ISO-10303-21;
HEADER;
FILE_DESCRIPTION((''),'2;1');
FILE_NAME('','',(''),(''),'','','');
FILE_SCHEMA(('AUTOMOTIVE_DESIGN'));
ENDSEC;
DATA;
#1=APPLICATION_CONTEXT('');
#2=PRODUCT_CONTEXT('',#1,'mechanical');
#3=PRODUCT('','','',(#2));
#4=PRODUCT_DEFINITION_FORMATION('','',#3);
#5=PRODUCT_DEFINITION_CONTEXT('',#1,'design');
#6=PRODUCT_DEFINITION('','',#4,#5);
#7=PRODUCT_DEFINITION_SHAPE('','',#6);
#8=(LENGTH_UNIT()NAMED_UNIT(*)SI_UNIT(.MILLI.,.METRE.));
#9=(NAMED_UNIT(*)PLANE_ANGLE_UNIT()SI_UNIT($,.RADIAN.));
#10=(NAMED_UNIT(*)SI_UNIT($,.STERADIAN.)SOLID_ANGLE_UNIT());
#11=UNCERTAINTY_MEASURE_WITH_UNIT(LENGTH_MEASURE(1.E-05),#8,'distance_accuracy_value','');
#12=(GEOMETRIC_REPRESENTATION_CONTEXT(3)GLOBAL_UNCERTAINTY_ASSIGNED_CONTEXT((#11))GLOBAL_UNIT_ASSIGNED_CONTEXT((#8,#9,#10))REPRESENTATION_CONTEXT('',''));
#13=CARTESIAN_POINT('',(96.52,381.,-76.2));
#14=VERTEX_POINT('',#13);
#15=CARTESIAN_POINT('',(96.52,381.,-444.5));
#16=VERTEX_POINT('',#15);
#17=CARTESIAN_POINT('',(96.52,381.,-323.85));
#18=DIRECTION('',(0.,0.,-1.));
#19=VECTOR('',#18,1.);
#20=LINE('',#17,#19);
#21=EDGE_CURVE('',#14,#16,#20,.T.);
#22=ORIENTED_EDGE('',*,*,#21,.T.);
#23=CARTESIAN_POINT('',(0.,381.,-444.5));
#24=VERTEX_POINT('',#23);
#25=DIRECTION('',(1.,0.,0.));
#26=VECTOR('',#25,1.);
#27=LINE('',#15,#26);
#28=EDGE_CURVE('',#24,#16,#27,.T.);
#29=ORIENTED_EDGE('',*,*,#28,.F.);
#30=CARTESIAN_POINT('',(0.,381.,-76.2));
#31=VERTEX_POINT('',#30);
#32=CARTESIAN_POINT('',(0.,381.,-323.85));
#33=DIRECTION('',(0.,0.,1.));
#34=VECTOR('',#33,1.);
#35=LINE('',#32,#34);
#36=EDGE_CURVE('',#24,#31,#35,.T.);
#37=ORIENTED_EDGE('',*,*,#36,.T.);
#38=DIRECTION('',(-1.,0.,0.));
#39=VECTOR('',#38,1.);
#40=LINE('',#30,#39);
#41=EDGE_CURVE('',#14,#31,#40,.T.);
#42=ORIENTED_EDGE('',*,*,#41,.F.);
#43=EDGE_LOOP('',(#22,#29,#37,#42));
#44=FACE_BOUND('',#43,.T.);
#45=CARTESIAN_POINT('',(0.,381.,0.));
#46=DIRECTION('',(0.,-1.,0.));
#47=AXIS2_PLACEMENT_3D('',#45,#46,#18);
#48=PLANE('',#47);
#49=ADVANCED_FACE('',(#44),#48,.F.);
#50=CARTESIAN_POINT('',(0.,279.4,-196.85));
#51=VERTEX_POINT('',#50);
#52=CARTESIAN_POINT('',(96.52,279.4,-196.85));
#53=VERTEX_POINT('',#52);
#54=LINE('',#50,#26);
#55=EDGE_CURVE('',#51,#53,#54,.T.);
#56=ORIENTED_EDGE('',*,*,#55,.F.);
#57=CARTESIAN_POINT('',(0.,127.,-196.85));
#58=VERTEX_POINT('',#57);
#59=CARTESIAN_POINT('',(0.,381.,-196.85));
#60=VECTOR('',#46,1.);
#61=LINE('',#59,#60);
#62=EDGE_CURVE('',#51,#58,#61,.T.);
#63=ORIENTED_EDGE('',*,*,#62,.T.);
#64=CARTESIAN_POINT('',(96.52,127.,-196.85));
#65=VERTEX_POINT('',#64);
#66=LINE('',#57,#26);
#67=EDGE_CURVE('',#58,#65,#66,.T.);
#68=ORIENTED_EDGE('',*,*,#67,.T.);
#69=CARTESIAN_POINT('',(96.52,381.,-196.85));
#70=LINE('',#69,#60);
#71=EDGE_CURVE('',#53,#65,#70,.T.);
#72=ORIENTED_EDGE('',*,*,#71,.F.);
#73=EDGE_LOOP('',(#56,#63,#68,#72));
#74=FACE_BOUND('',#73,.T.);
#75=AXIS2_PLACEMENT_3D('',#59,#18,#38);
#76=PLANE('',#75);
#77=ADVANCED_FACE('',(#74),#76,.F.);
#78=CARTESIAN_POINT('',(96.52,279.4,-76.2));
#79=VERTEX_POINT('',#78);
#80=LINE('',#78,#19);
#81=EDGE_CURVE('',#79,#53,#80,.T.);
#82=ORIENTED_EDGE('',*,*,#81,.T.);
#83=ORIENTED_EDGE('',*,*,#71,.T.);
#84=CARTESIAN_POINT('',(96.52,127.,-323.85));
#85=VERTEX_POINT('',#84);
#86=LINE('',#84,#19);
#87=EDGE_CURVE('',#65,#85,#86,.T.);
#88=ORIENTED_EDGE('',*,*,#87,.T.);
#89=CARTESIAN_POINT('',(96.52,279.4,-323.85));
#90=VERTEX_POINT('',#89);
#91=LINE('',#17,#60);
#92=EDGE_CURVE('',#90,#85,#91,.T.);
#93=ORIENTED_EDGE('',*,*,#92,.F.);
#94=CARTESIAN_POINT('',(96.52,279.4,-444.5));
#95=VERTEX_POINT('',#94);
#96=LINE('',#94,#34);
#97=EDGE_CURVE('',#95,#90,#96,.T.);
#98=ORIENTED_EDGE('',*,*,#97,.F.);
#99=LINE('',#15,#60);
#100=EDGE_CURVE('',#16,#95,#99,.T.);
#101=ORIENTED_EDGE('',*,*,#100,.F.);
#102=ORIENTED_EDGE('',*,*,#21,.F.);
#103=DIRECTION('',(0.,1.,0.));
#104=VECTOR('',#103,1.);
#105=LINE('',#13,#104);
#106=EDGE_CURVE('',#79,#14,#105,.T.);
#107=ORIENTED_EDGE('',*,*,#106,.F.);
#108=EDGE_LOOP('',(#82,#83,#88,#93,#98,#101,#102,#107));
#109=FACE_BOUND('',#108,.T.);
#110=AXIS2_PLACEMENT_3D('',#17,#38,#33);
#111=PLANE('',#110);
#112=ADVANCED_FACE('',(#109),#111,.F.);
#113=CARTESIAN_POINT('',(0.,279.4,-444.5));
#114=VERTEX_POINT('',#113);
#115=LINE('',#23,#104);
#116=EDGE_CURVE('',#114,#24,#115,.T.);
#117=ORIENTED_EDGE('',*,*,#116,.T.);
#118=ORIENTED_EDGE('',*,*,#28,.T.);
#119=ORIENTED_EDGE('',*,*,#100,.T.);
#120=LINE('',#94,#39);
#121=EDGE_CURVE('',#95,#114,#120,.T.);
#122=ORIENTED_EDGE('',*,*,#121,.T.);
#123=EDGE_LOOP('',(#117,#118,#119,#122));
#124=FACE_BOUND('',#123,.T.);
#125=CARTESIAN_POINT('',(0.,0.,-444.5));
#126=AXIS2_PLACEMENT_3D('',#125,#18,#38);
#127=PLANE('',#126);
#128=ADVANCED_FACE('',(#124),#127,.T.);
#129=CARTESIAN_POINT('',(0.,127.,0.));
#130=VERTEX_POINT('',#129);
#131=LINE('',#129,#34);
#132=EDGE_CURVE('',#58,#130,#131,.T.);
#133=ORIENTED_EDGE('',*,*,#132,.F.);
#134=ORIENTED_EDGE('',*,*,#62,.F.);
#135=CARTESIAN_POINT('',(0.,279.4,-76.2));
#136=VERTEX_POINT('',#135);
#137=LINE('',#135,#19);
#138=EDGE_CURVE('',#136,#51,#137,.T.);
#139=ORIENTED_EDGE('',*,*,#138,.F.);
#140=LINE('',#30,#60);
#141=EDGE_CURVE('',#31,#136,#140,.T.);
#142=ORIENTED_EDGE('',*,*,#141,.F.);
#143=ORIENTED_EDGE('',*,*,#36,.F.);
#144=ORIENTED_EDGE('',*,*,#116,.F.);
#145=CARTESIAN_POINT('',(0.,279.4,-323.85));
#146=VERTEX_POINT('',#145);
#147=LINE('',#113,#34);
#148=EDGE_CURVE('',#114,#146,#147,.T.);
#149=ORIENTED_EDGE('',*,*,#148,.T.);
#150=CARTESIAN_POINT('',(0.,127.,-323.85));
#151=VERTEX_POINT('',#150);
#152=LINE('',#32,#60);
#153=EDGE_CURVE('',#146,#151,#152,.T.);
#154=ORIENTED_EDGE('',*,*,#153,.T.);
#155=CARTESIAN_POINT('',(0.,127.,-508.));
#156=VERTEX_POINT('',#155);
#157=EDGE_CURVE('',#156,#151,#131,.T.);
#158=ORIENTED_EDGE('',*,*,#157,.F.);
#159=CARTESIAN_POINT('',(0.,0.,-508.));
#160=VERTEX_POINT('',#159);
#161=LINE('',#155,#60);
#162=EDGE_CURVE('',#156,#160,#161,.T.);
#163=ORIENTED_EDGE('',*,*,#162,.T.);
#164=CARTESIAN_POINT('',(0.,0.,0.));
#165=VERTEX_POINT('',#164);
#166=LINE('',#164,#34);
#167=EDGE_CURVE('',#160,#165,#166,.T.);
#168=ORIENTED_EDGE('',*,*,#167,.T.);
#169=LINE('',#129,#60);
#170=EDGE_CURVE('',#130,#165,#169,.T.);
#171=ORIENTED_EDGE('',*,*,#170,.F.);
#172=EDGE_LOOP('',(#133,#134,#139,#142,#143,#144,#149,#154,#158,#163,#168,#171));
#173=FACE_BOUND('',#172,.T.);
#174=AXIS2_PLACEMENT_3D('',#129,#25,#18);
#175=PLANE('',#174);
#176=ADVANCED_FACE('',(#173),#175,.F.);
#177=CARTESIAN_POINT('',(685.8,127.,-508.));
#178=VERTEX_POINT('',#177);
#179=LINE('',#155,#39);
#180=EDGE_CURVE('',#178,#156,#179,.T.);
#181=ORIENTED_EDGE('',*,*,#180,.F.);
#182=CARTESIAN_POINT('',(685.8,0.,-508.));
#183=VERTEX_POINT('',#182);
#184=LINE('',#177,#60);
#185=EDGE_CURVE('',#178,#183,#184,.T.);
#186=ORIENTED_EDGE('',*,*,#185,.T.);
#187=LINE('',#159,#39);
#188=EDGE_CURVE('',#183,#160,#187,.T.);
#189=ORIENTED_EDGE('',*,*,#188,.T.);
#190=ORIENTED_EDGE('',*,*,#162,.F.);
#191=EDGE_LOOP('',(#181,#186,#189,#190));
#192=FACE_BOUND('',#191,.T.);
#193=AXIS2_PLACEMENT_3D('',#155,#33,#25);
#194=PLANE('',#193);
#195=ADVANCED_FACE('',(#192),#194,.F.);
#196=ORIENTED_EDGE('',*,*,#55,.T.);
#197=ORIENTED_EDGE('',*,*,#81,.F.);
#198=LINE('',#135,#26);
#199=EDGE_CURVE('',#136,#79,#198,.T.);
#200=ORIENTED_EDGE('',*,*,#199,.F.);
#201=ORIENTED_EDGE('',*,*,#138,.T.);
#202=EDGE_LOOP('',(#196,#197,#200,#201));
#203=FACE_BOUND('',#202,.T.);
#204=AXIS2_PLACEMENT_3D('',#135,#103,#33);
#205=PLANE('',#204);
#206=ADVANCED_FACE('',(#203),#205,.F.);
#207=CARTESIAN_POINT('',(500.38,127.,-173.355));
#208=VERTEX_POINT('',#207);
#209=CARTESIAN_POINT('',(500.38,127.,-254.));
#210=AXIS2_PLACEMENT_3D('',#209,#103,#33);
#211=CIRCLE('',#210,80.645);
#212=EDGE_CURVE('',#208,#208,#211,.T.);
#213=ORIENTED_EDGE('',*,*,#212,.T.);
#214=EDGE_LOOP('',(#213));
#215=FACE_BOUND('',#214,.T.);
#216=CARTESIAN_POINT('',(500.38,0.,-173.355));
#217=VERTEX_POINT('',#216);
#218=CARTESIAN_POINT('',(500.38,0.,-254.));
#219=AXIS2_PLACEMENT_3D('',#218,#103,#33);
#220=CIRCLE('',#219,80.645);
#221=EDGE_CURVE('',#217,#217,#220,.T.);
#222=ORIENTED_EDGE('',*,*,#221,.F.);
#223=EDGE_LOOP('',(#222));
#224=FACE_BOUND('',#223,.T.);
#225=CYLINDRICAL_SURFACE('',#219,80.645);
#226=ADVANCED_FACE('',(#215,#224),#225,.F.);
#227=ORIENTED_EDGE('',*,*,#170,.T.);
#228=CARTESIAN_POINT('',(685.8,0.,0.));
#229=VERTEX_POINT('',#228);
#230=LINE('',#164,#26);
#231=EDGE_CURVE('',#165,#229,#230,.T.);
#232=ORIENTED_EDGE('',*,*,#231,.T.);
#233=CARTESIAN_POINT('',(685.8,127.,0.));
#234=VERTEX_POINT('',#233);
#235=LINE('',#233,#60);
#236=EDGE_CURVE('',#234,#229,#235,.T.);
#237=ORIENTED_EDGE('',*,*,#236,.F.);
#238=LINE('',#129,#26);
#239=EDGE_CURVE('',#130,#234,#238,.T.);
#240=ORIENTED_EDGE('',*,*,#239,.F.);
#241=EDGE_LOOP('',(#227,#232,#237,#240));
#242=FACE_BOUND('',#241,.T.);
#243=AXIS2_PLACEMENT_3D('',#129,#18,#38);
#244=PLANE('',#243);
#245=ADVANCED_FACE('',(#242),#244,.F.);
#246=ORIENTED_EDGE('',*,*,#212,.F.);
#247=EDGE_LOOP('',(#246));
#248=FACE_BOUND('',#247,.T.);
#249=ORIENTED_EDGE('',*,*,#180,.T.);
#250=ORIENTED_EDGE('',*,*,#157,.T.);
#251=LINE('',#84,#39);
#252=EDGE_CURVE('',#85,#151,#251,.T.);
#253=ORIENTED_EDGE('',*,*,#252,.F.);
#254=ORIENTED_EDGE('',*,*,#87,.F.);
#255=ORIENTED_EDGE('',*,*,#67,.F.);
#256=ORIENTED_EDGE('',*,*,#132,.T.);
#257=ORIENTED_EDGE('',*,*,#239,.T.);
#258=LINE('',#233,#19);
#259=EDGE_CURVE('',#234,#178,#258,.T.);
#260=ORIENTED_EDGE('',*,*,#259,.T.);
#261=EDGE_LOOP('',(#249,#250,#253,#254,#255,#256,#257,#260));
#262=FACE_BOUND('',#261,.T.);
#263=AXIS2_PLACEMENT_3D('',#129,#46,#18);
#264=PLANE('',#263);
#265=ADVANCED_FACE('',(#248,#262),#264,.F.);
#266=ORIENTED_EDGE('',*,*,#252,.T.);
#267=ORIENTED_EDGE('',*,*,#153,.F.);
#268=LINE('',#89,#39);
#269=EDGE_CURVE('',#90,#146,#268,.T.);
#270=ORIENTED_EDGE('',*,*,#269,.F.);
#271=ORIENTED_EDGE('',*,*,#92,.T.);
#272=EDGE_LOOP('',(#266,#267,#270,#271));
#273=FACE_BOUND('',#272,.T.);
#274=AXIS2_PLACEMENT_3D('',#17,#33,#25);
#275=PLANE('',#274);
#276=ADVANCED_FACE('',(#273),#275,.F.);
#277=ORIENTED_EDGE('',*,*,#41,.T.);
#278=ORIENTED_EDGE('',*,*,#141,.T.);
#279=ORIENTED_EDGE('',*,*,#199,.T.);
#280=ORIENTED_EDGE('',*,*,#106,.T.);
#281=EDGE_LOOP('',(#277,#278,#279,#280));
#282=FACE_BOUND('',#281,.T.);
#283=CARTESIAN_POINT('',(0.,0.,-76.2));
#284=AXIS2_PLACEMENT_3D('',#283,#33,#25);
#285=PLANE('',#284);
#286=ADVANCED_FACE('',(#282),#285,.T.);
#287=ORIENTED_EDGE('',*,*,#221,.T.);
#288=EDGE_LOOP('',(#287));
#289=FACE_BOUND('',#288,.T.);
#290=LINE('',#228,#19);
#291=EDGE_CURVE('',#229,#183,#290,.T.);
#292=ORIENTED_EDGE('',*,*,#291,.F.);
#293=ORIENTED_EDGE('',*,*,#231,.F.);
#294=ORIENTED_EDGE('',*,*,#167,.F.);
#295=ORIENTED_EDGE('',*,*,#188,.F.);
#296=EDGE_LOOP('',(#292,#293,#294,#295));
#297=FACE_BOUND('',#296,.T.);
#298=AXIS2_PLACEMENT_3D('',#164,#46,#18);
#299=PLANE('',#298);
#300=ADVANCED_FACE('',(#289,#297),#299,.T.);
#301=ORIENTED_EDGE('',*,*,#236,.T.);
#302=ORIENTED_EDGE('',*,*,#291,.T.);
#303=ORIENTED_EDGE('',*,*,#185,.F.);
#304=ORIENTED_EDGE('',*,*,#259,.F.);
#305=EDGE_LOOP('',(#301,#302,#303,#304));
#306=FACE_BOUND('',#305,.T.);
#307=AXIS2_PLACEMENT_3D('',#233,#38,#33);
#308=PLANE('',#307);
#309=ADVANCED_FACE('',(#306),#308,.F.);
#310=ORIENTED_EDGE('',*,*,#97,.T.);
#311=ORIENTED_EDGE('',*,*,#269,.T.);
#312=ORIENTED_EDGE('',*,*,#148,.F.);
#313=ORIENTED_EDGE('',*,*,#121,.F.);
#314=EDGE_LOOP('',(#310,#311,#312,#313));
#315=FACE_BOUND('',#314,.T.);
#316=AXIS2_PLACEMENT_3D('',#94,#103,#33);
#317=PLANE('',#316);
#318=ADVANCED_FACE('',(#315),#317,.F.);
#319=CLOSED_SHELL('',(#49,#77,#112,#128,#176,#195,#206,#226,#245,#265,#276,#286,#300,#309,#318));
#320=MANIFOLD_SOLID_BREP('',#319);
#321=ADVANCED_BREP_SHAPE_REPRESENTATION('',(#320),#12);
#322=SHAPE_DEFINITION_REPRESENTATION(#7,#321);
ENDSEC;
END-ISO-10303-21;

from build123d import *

# Parameters (mm, degrees)
SKETCH1_W           = 685.8
SKETCH1_H           = 508
BOSS_EXTRUDE1_DEPTH = 127
SKETCH2_W           = 96.52
SKETCH2_H           = 127
BOSS_EXTRUDE2_DEPTH = 254
SKETCH3_W           = 96.52
SKETCH3_H           = 101.6
BOSS_EXTRUDE3_DEPTH = 120.65
SKETCH4_W           = 96.52
SKETCH4_H           = 101.6
BOSS_EXTRUDE4_DEPTH = 120.65
HOLE4_OUTLINE_R     = 80.645
HOLE4_DEPTH         = 127


# Read off the part's stored shape, not the designer's step: Hole4
with BuildPart() as part:
    # Sketch1 → Boss-Extrude1 (new body)
    with BuildSketch(Plane(origin=(0, 0, 0), x_dir=(1, 0, 0), z_dir=(0, 1, 0))):
        with Locations((342.9, 254)):
            Rectangle(SKETCH1_W, SKETCH1_H)
    extrude(amount=BOSS_EXTRUDE1_DEPTH)

    # Sketch2 → Boss-Extrude2 (add)
    with BuildSketch(Plane(origin=(0, 127, 0), x_dir=(1, 0, 0), z_dir=(0, 1, 0))):
        with Locations((48.26, 260.35)):
            Rectangle(SKETCH2_W, SKETCH2_H)
    extrude(amount=BOSS_EXTRUDE2_DEPTH)

    # Sketch3 → Boss-Extrude3 (add)
    with BuildSketch(Plane.XY.offset(-196.85)):
        with Locations((48.26, 330.2)):
            Rectangle(SKETCH3_W, SKETCH3_H)
    extrude(amount=BOSS_EXTRUDE3_DEPTH)

    # Sketch4 → Boss-Extrude4 (add)
    with BuildSketch(Plane(origin=(0, 0, -323.85), x_dir=(-1, 0, 0), z_dir=(0, 0, -1))):
        with Locations((-48.26, 330.2)):
            Rectangle(SKETCH4_W, SKETCH4_H)
    extrude(amount=BOSS_EXTRUDE4_DEPTH)

    # Hole4 outline → Hole4 (cut)
    with BuildSketch(Plane(origin=(0, 0, 0), x_dir=(1, 0, 0), z_dir=(0, 1, 0))):
        with Locations((500.38, 254)):
            Circle(HOLE4_OUTLINE_R)
    extrude(amount=HOLE4_DEPTH, mode=Mode.SUBTRACT)


solid = part.part
